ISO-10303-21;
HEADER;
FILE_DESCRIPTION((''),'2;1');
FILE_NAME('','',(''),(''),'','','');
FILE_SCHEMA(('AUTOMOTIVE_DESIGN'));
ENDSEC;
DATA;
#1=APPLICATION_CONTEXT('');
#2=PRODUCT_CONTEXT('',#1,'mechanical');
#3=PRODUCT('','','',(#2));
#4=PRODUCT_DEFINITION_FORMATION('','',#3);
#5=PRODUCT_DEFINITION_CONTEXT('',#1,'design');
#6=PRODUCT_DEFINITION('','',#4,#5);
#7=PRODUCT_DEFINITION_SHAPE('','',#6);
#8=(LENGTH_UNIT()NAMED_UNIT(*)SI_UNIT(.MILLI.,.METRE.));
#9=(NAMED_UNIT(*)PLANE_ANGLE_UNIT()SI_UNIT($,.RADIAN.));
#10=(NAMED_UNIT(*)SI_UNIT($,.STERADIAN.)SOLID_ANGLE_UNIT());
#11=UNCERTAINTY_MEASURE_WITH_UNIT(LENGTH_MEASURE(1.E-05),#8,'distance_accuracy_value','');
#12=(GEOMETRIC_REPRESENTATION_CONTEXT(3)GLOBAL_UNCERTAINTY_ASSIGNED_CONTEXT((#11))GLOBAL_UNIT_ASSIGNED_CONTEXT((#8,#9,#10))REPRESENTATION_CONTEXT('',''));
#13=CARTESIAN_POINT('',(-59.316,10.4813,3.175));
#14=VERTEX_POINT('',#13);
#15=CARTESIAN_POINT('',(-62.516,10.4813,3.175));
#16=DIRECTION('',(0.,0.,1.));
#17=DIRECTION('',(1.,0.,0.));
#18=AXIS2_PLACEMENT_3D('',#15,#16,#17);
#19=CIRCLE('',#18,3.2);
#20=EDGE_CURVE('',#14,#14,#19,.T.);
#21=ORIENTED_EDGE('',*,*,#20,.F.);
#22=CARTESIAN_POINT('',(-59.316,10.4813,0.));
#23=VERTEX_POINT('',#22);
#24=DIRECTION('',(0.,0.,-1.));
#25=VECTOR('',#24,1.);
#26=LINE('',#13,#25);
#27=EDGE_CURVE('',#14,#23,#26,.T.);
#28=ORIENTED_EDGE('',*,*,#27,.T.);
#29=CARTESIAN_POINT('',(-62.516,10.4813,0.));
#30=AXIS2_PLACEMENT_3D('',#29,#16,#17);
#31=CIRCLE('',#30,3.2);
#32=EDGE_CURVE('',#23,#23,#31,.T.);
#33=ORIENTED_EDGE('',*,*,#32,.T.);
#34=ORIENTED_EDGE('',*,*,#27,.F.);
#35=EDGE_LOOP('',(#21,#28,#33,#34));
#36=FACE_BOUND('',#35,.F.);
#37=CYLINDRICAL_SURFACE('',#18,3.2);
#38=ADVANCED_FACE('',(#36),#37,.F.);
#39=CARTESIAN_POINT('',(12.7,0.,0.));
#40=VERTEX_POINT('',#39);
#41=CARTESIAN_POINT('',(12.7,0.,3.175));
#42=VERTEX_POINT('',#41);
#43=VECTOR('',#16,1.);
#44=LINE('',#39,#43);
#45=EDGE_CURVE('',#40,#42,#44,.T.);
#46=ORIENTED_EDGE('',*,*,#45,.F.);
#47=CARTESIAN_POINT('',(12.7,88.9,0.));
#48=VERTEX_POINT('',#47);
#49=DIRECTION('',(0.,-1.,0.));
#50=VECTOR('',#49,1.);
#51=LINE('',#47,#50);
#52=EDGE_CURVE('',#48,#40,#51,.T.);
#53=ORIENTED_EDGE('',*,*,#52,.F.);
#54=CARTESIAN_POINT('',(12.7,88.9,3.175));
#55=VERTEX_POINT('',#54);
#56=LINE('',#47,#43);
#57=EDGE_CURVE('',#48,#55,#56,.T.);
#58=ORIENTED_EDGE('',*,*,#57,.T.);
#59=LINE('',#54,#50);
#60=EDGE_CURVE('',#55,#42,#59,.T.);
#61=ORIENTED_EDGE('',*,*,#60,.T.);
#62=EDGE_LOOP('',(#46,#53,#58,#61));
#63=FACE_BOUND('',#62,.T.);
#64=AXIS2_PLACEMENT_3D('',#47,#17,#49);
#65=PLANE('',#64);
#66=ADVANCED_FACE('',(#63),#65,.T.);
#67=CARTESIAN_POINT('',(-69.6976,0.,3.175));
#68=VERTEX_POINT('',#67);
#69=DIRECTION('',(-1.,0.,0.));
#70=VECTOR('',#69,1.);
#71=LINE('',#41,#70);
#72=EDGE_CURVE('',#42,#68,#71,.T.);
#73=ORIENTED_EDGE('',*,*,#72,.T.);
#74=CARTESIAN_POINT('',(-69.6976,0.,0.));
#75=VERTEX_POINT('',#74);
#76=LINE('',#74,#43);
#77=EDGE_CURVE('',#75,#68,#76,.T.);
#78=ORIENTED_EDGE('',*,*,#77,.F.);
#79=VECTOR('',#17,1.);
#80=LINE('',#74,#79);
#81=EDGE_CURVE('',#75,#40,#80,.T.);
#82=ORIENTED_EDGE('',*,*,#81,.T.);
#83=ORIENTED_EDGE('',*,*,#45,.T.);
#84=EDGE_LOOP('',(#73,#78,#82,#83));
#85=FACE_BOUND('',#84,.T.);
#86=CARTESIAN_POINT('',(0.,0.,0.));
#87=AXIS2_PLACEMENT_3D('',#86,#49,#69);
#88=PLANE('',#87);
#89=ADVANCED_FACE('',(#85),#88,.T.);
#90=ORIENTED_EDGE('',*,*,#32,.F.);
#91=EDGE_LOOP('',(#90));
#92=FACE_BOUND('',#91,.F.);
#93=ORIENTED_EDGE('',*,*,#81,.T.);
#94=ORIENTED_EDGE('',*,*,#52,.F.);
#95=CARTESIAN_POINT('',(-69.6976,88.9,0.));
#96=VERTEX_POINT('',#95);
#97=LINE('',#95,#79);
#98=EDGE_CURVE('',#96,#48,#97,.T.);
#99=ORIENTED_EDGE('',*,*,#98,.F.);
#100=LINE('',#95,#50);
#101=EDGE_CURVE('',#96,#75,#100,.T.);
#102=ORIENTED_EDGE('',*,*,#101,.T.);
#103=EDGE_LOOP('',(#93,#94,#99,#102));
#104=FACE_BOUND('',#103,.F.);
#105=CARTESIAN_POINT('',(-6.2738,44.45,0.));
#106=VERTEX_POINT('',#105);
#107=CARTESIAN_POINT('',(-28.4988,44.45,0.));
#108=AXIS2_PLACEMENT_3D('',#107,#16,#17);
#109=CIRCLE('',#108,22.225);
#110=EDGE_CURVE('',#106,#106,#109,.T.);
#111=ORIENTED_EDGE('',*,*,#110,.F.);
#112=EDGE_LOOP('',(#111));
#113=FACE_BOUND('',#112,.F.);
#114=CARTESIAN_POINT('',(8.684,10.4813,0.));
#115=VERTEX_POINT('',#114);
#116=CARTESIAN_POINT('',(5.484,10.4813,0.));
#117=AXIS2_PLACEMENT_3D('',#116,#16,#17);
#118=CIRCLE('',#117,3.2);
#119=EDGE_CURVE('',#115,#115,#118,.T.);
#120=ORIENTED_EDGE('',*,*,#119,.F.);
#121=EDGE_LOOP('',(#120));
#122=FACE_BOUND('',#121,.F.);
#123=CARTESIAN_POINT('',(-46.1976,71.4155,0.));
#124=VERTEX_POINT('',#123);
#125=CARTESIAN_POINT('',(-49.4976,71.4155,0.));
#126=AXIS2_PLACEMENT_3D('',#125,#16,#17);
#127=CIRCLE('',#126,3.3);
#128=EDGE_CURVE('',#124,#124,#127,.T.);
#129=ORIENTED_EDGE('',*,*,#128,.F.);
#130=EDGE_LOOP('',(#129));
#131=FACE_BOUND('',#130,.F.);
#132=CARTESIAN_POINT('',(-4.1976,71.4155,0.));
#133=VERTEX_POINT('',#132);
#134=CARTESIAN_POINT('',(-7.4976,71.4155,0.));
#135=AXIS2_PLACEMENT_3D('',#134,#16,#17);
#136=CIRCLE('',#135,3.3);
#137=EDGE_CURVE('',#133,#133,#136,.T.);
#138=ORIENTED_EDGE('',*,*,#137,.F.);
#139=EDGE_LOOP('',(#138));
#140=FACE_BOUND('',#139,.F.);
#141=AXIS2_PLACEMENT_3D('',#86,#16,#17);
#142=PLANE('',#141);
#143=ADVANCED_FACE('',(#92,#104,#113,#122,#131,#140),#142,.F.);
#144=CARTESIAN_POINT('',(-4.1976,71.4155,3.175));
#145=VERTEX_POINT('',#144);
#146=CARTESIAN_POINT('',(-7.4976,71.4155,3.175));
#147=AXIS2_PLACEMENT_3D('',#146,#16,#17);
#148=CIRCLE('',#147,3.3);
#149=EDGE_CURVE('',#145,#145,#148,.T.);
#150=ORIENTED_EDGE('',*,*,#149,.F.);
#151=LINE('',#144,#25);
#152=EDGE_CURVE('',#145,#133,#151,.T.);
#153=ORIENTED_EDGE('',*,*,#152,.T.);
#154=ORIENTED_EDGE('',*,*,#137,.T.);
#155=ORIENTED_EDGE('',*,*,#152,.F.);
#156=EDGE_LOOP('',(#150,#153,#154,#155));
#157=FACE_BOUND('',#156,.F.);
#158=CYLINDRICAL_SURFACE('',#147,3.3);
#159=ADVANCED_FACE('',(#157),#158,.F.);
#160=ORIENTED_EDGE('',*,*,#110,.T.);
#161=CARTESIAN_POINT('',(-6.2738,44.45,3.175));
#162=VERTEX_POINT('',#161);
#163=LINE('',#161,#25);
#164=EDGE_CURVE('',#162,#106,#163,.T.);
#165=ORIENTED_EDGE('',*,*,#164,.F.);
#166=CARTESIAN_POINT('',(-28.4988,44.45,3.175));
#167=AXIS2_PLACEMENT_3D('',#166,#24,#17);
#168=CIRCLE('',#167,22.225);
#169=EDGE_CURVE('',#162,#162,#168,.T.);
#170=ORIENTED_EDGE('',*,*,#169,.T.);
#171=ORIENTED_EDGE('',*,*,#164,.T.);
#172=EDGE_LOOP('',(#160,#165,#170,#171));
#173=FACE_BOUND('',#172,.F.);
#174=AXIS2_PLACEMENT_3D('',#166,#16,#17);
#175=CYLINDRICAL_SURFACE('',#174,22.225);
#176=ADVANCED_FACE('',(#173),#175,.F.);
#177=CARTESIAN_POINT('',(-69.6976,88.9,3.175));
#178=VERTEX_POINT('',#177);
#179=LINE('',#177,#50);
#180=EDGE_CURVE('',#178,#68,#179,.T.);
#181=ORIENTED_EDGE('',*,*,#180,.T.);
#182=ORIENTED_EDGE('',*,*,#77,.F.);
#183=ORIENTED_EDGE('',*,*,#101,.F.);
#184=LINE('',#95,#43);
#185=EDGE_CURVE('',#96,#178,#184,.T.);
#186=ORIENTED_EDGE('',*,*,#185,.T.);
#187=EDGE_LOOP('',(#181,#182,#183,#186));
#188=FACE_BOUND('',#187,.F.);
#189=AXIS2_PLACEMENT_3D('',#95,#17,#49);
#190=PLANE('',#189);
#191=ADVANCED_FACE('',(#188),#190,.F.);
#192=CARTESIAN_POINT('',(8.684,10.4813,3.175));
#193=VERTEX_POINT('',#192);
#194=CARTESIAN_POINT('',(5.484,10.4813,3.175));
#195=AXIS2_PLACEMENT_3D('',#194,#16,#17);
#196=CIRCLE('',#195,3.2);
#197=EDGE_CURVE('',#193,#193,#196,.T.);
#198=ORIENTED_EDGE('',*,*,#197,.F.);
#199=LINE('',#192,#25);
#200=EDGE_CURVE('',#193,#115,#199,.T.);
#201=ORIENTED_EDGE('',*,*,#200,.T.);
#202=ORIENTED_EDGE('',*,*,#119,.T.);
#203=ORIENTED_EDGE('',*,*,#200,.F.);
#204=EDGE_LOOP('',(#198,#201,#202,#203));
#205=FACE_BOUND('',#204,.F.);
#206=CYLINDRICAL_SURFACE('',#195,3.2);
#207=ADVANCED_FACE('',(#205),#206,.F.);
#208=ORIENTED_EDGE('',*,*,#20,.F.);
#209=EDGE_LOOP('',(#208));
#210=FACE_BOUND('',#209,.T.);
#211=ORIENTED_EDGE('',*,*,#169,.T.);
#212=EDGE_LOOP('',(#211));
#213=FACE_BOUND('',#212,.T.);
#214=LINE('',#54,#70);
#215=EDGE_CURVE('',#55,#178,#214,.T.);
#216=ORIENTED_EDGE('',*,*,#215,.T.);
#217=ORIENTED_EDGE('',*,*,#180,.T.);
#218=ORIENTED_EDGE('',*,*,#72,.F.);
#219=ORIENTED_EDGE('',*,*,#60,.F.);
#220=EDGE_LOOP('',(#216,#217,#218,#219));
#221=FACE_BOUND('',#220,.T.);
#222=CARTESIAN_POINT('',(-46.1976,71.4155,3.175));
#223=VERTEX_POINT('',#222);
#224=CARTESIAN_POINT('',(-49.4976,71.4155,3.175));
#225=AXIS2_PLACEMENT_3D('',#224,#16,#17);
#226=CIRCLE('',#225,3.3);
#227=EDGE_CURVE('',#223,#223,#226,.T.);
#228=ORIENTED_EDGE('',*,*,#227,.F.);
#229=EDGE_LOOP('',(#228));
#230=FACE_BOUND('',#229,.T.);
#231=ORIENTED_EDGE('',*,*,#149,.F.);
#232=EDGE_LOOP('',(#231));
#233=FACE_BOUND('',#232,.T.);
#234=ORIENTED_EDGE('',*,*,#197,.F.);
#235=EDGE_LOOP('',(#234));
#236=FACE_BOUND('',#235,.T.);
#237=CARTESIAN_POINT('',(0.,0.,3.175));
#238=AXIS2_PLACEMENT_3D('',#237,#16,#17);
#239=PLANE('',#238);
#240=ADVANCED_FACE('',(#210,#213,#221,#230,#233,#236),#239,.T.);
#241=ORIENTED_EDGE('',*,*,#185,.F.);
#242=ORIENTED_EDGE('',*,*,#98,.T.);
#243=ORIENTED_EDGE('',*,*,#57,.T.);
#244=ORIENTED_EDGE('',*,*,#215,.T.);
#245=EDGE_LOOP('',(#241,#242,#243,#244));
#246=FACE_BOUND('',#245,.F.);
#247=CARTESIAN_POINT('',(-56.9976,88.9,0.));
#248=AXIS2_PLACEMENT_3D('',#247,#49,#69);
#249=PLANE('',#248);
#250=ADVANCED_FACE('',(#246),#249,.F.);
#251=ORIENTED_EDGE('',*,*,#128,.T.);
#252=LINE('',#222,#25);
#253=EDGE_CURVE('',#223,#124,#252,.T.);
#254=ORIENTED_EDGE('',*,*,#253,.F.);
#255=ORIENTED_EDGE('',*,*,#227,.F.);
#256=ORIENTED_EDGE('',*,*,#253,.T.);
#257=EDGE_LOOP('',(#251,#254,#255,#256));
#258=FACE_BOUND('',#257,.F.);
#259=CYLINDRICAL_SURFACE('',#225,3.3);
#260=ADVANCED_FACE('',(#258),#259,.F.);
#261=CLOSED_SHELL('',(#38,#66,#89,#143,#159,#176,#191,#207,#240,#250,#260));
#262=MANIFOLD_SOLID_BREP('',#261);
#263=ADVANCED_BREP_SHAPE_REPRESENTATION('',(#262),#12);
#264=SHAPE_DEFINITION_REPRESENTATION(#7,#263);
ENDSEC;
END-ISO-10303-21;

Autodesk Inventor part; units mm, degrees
ref_plane "YZ Plane" through (0, 0, 0) normal (1, 0, 0) x (0, 1, 0)
ref_plane "XZ Plane" through (0, 0, 0) normal (0, 1, 0) x (-1, 0, 0)
ref_plane "XY Plane" through (0, 0, 0) normal (0, 0, 1) x (1, 0, 0)
sketch "Sketch1" plane through (0, 0, 0) normal (0, 0, 1) x (1, 0, 0)
  line L0 (0, 0) -> (-56.9976, 0)
  line L1 (-56.9976, 88.9) -> (0, 88.9)
  line L2 (0, 88.9) -> (-7.493, 88.9)
  line L3 (-7.493, 88.9) -> (-7.493, 82.55)
  line L4 (-56.9976, 88.9) -> (-49.5046, 88.9)
  line L5 (-49.5046, 88.9) -> (-49.5046, 82.55)
  line L6 (-56.9976, 88.9) -> (-69.6976, 88.9)
  line L7 (-69.6976, 88.9) -> (-69.6976, 0)
  line L8 (-69.6976, 0) -> (-56.9976, 0)
  line L9 (0, 88.9) -> (8.89, 88.9)
  line L10 (8.89, 0) -> (0, 0)
  line L11 (0, 88.9) -> (12.7, 88.9)
  line L12 (12.7, 88.9) -> (12.7, 0)
  line L13 (12.7, 0) -> (0, 0)
  dimension "d1" = 56.9976
  dimension "d2" = 88.9
  dimension "d3" = 7.493
  dimension "d4" = 6.35
  dimension "d5" = 7.493
  dimension "d19" = 6.35
  dimension "d48" = 12.7
  dimension "d57" = 12.7
extrude "Plate5" add sketch "Sketch1" along normal blind 3.175
sketch "Sketch7" plane through (12.7, 0, 0) normal (1, 0, 0) x (0, 0, -1)
  line L0 (-3.175, 88.9) -> (-3.175, 0) projected
  line L1 (0, 0) -> (-3.175, 0) projected
  line L2 (0, 0) -> (0, 88.9) projected
  line L3 (0, 88.9) -> (-3.175, 88.9) projected
sketch "Sketch11" plane through (0, 0, 3.175) normal (0, 0, 1) x (1, 0, 0)
  circle A0 centre (-7.4976, 71.4155) radius 3.3
  circle A1 centre (-49.4976, 71.4155) radius 3.3
  circle A2 centre (5.484, 10.4813) radius 3.2
  line L0 (-11.9976, 581.6155) -> (-11.9976, -78.7845)
  circle A3 centre (5.484, 10.4813) radius 3.2
  line L1 (-53.516, -9.5187) -> (-68.516, -9.5187)
  line L2 (-68.516, 30.4813) -> (-68.516, -9.5187)
  line L3 (-68.516, 30.4813) -> (-53.516, 30.4813)
  line L4 (-53.516, 30.4813) -> (-53.516, -9.5187)
  circle A4 centre (-62.516, 10.4813) radius 3.2
  circle A5 centre (-62.516, 10.4813) radius 3.2
  point P0 (0, 0)
  point P1 (-28.516, 7.2815)
extrude "Cut5" cut sketch "Sketch11" against normal blind 3.175 contours A0 | A1 | A2 | A4
sketch "Sketch12" plane through (0, 0, 3.175) normal (0, 0, 1) x (1, 0, 0)
  line L0 (-69.6976, 88.9) -> (12.7, 88.9) projected
  line L1 (-69.6976, 0) -> (-69.6976, 88.9) projected
  line L2 (-28.4988, 88.9) -> (-28.4988, 44.45)
  circle A0 centre (-28.4988, 44.45) radius 22.225
  point P0 (0, 0)
  dimension "d71" = 44.45
extrude "Cut6" cut sketch "Sketch12" against normal blind 3.175
equation "\"d69\" = Thickness"
equation "\"d72\" = Thickness"
equation "\"BendRadius\" = Thickness"
equation "\"BendReliefWidth\" = Thickness"
equation "\"BendReliefDepth\" = 0.5 * Thickness"
equation "\"CornerReliefSize\" = 4 * Thickness"
equation "\"MinimumRemnant\" = 2 * Thickness"
equation "\"TransitionRadius\" = BendRadius"
equation "\"JacobiRadiusSize\" = BendRadius"
equation "\"GapSize\" = Thickness"
equation "\"d8\" = BendRadius"
equation "\"d56\" = BendRadius"
equation "\"Thickness\" = 3.175"
properties part number "upper face mount" material "Aluminum 6061"
